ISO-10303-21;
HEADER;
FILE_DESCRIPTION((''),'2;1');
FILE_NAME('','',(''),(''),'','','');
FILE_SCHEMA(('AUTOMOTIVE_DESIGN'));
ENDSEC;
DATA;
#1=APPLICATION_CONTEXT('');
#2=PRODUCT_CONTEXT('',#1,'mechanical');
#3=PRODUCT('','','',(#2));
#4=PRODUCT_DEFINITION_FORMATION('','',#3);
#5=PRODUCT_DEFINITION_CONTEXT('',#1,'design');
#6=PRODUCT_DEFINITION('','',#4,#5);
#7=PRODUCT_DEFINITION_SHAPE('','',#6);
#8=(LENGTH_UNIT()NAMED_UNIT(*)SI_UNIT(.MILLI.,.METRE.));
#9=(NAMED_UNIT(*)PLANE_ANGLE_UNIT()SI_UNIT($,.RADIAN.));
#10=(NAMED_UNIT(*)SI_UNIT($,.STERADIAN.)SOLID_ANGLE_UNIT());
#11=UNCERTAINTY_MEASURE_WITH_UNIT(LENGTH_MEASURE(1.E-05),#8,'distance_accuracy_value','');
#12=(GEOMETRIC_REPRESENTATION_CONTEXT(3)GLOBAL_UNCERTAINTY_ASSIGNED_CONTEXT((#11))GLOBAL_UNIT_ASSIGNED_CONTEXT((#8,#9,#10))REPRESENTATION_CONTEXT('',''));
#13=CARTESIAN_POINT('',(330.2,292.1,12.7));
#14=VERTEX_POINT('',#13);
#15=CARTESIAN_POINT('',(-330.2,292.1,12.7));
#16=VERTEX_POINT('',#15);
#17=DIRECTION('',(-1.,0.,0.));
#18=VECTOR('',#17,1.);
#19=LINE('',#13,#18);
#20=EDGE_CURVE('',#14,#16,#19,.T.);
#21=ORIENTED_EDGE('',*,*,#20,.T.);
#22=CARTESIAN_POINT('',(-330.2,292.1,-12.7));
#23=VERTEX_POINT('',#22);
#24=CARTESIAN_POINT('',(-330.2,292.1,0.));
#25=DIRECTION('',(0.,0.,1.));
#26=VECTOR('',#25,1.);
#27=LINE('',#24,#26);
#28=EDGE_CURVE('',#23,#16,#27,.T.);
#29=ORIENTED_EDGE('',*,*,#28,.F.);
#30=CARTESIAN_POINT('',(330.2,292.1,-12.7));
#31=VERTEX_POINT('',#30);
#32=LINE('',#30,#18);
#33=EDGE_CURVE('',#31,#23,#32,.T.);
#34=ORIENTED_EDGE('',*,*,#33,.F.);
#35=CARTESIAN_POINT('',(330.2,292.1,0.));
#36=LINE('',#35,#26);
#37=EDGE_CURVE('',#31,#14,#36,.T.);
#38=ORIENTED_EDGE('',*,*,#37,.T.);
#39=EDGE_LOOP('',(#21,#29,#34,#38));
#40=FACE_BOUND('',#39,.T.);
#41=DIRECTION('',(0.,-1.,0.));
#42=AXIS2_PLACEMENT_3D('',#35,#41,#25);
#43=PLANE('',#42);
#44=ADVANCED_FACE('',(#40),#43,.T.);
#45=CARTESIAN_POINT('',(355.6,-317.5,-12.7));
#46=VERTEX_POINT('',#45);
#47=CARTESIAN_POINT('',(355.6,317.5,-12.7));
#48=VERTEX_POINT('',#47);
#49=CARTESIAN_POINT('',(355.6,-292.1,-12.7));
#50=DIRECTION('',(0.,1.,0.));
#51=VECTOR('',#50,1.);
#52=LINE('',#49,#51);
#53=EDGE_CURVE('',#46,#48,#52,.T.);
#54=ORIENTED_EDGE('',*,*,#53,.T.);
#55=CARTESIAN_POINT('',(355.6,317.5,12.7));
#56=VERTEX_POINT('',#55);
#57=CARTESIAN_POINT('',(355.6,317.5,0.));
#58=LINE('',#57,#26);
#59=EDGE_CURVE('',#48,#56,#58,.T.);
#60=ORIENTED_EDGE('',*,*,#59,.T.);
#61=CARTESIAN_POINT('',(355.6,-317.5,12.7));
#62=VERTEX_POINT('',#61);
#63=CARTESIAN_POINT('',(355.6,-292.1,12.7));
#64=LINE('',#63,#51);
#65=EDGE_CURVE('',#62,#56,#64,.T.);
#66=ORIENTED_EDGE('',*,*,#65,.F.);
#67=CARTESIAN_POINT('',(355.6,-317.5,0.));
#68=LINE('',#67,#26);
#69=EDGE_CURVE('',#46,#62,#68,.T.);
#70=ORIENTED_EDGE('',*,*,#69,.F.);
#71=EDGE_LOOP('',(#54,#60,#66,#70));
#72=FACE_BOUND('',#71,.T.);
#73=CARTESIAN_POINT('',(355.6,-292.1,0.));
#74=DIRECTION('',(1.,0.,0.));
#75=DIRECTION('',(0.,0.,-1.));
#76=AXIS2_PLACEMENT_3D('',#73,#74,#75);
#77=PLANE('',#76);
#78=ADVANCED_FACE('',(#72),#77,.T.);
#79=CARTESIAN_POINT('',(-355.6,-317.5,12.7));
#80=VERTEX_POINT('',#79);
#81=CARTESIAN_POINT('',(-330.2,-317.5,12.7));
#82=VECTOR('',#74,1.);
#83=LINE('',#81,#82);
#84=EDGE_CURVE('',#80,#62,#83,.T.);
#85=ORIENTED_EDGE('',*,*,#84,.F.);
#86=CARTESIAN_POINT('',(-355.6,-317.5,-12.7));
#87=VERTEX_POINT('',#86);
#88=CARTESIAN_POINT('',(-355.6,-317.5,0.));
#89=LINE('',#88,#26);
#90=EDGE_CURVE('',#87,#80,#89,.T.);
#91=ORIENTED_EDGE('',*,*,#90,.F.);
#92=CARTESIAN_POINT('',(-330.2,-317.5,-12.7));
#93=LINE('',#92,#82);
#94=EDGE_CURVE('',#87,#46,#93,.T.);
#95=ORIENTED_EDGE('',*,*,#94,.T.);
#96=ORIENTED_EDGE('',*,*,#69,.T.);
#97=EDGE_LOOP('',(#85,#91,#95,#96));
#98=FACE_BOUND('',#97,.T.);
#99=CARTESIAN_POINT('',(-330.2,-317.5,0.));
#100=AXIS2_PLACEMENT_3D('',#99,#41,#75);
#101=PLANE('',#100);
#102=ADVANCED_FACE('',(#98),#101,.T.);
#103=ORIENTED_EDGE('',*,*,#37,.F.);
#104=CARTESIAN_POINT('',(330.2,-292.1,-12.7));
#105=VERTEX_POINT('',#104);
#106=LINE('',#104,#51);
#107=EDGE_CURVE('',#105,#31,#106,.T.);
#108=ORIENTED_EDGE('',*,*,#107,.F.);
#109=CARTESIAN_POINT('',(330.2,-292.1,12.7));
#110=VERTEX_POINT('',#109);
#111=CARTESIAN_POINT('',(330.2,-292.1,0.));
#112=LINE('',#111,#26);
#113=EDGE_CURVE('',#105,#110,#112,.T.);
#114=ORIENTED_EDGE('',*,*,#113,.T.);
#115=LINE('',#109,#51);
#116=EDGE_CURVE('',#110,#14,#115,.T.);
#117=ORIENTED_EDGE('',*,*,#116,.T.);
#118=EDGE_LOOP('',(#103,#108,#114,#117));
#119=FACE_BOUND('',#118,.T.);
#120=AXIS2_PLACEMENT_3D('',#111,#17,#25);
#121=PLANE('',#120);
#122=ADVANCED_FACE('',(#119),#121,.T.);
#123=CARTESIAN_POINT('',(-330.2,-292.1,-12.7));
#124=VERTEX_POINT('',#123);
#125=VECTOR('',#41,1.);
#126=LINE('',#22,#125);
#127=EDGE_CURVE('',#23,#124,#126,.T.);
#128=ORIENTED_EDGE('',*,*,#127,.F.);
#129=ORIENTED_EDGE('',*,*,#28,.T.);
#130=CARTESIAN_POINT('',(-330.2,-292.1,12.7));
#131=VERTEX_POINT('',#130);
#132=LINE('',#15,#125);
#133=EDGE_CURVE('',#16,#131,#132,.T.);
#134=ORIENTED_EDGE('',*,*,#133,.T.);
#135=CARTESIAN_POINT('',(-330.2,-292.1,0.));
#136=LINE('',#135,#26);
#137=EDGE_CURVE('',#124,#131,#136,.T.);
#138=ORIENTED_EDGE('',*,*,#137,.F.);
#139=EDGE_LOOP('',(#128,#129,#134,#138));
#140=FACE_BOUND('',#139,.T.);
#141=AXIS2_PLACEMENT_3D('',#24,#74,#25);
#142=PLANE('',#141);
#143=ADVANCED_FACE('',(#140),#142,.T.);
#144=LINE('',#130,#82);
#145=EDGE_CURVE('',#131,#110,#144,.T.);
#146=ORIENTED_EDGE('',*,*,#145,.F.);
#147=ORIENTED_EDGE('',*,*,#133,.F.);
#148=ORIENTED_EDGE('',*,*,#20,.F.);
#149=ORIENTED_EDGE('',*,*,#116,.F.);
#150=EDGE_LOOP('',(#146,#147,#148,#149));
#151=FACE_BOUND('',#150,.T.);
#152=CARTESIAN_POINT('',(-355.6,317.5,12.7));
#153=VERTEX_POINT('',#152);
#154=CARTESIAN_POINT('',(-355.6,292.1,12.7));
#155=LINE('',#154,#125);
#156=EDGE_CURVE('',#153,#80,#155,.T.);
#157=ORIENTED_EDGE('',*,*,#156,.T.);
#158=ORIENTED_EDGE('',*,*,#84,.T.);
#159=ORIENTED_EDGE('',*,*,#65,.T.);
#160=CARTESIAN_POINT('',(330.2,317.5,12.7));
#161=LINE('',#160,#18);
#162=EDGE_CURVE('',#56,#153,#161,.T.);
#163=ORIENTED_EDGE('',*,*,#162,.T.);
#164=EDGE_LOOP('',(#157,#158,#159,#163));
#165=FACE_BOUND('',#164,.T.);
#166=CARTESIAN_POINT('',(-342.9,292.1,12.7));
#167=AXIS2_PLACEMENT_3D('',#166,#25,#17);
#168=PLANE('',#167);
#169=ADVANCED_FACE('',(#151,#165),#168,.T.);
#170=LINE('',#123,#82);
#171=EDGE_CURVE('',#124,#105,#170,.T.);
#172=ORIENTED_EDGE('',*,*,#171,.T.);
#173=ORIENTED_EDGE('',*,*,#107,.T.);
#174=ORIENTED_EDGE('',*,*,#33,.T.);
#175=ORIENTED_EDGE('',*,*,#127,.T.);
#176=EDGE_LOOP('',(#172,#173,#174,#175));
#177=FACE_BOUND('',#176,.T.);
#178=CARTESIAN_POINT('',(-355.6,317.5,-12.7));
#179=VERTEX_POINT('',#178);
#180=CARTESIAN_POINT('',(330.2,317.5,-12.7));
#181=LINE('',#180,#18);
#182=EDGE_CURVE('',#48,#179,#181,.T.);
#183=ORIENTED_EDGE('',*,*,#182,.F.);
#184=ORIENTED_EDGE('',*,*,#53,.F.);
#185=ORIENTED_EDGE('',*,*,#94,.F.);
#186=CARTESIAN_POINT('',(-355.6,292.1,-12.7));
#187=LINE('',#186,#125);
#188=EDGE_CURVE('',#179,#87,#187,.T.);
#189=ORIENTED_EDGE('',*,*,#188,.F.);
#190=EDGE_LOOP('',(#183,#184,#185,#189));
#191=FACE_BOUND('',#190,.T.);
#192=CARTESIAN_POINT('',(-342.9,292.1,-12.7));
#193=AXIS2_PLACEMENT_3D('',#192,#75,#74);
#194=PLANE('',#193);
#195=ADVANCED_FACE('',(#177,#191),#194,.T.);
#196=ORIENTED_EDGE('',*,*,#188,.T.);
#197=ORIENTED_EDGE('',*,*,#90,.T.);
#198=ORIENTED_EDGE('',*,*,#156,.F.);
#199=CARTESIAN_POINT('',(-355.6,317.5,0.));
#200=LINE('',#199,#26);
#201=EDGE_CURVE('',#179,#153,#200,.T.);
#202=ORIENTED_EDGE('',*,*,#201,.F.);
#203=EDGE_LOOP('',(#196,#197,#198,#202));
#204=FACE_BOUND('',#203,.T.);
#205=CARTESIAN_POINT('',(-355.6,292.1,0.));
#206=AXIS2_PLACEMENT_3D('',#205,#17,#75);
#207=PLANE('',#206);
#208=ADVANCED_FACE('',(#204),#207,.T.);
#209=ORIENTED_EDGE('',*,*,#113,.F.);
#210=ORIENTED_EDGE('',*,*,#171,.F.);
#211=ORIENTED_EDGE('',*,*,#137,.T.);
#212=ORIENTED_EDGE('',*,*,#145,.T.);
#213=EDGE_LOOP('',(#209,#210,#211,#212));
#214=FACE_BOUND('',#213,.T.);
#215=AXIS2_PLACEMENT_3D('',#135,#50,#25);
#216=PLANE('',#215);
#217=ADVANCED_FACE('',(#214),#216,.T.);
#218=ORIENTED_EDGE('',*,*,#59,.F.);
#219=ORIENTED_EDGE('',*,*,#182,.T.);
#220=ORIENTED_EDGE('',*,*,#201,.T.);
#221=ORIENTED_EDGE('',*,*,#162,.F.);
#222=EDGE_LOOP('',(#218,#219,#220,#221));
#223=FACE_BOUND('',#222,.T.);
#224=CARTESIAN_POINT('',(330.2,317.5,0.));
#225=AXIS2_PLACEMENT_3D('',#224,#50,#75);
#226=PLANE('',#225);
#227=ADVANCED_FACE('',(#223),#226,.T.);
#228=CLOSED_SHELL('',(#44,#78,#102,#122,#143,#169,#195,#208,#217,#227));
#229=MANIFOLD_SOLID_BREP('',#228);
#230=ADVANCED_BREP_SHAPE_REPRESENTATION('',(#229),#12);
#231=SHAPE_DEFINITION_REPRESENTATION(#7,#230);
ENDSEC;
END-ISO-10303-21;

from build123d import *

# Parameters (mm, degrees)
F1_W = 25.4
F1_H = 25.4


with BuildPart() as f2:
    # F2: sweep along a path in F0
    with BuildLine(Plane.XY) as f2_path:
        Line((-330.2, 292.1), (-330.2, -292.1))
        Line((-330.2, -292.1), (330.2, -292.1))
        Line((330.2, -292.1), (330.2, 292.1))
        Line((330.2, 292.1), (-330.2, 292.1))
    # F1 (on Front) → F2 (sweep)
    with BuildSketch(Plane.XZ):
        with Locations((-342.9, 0)):
            Rectangle(F1_W, F1_H)
    sweep(path=f2_path.line, transition=Transition.RIGHT)


solid = f2.part
